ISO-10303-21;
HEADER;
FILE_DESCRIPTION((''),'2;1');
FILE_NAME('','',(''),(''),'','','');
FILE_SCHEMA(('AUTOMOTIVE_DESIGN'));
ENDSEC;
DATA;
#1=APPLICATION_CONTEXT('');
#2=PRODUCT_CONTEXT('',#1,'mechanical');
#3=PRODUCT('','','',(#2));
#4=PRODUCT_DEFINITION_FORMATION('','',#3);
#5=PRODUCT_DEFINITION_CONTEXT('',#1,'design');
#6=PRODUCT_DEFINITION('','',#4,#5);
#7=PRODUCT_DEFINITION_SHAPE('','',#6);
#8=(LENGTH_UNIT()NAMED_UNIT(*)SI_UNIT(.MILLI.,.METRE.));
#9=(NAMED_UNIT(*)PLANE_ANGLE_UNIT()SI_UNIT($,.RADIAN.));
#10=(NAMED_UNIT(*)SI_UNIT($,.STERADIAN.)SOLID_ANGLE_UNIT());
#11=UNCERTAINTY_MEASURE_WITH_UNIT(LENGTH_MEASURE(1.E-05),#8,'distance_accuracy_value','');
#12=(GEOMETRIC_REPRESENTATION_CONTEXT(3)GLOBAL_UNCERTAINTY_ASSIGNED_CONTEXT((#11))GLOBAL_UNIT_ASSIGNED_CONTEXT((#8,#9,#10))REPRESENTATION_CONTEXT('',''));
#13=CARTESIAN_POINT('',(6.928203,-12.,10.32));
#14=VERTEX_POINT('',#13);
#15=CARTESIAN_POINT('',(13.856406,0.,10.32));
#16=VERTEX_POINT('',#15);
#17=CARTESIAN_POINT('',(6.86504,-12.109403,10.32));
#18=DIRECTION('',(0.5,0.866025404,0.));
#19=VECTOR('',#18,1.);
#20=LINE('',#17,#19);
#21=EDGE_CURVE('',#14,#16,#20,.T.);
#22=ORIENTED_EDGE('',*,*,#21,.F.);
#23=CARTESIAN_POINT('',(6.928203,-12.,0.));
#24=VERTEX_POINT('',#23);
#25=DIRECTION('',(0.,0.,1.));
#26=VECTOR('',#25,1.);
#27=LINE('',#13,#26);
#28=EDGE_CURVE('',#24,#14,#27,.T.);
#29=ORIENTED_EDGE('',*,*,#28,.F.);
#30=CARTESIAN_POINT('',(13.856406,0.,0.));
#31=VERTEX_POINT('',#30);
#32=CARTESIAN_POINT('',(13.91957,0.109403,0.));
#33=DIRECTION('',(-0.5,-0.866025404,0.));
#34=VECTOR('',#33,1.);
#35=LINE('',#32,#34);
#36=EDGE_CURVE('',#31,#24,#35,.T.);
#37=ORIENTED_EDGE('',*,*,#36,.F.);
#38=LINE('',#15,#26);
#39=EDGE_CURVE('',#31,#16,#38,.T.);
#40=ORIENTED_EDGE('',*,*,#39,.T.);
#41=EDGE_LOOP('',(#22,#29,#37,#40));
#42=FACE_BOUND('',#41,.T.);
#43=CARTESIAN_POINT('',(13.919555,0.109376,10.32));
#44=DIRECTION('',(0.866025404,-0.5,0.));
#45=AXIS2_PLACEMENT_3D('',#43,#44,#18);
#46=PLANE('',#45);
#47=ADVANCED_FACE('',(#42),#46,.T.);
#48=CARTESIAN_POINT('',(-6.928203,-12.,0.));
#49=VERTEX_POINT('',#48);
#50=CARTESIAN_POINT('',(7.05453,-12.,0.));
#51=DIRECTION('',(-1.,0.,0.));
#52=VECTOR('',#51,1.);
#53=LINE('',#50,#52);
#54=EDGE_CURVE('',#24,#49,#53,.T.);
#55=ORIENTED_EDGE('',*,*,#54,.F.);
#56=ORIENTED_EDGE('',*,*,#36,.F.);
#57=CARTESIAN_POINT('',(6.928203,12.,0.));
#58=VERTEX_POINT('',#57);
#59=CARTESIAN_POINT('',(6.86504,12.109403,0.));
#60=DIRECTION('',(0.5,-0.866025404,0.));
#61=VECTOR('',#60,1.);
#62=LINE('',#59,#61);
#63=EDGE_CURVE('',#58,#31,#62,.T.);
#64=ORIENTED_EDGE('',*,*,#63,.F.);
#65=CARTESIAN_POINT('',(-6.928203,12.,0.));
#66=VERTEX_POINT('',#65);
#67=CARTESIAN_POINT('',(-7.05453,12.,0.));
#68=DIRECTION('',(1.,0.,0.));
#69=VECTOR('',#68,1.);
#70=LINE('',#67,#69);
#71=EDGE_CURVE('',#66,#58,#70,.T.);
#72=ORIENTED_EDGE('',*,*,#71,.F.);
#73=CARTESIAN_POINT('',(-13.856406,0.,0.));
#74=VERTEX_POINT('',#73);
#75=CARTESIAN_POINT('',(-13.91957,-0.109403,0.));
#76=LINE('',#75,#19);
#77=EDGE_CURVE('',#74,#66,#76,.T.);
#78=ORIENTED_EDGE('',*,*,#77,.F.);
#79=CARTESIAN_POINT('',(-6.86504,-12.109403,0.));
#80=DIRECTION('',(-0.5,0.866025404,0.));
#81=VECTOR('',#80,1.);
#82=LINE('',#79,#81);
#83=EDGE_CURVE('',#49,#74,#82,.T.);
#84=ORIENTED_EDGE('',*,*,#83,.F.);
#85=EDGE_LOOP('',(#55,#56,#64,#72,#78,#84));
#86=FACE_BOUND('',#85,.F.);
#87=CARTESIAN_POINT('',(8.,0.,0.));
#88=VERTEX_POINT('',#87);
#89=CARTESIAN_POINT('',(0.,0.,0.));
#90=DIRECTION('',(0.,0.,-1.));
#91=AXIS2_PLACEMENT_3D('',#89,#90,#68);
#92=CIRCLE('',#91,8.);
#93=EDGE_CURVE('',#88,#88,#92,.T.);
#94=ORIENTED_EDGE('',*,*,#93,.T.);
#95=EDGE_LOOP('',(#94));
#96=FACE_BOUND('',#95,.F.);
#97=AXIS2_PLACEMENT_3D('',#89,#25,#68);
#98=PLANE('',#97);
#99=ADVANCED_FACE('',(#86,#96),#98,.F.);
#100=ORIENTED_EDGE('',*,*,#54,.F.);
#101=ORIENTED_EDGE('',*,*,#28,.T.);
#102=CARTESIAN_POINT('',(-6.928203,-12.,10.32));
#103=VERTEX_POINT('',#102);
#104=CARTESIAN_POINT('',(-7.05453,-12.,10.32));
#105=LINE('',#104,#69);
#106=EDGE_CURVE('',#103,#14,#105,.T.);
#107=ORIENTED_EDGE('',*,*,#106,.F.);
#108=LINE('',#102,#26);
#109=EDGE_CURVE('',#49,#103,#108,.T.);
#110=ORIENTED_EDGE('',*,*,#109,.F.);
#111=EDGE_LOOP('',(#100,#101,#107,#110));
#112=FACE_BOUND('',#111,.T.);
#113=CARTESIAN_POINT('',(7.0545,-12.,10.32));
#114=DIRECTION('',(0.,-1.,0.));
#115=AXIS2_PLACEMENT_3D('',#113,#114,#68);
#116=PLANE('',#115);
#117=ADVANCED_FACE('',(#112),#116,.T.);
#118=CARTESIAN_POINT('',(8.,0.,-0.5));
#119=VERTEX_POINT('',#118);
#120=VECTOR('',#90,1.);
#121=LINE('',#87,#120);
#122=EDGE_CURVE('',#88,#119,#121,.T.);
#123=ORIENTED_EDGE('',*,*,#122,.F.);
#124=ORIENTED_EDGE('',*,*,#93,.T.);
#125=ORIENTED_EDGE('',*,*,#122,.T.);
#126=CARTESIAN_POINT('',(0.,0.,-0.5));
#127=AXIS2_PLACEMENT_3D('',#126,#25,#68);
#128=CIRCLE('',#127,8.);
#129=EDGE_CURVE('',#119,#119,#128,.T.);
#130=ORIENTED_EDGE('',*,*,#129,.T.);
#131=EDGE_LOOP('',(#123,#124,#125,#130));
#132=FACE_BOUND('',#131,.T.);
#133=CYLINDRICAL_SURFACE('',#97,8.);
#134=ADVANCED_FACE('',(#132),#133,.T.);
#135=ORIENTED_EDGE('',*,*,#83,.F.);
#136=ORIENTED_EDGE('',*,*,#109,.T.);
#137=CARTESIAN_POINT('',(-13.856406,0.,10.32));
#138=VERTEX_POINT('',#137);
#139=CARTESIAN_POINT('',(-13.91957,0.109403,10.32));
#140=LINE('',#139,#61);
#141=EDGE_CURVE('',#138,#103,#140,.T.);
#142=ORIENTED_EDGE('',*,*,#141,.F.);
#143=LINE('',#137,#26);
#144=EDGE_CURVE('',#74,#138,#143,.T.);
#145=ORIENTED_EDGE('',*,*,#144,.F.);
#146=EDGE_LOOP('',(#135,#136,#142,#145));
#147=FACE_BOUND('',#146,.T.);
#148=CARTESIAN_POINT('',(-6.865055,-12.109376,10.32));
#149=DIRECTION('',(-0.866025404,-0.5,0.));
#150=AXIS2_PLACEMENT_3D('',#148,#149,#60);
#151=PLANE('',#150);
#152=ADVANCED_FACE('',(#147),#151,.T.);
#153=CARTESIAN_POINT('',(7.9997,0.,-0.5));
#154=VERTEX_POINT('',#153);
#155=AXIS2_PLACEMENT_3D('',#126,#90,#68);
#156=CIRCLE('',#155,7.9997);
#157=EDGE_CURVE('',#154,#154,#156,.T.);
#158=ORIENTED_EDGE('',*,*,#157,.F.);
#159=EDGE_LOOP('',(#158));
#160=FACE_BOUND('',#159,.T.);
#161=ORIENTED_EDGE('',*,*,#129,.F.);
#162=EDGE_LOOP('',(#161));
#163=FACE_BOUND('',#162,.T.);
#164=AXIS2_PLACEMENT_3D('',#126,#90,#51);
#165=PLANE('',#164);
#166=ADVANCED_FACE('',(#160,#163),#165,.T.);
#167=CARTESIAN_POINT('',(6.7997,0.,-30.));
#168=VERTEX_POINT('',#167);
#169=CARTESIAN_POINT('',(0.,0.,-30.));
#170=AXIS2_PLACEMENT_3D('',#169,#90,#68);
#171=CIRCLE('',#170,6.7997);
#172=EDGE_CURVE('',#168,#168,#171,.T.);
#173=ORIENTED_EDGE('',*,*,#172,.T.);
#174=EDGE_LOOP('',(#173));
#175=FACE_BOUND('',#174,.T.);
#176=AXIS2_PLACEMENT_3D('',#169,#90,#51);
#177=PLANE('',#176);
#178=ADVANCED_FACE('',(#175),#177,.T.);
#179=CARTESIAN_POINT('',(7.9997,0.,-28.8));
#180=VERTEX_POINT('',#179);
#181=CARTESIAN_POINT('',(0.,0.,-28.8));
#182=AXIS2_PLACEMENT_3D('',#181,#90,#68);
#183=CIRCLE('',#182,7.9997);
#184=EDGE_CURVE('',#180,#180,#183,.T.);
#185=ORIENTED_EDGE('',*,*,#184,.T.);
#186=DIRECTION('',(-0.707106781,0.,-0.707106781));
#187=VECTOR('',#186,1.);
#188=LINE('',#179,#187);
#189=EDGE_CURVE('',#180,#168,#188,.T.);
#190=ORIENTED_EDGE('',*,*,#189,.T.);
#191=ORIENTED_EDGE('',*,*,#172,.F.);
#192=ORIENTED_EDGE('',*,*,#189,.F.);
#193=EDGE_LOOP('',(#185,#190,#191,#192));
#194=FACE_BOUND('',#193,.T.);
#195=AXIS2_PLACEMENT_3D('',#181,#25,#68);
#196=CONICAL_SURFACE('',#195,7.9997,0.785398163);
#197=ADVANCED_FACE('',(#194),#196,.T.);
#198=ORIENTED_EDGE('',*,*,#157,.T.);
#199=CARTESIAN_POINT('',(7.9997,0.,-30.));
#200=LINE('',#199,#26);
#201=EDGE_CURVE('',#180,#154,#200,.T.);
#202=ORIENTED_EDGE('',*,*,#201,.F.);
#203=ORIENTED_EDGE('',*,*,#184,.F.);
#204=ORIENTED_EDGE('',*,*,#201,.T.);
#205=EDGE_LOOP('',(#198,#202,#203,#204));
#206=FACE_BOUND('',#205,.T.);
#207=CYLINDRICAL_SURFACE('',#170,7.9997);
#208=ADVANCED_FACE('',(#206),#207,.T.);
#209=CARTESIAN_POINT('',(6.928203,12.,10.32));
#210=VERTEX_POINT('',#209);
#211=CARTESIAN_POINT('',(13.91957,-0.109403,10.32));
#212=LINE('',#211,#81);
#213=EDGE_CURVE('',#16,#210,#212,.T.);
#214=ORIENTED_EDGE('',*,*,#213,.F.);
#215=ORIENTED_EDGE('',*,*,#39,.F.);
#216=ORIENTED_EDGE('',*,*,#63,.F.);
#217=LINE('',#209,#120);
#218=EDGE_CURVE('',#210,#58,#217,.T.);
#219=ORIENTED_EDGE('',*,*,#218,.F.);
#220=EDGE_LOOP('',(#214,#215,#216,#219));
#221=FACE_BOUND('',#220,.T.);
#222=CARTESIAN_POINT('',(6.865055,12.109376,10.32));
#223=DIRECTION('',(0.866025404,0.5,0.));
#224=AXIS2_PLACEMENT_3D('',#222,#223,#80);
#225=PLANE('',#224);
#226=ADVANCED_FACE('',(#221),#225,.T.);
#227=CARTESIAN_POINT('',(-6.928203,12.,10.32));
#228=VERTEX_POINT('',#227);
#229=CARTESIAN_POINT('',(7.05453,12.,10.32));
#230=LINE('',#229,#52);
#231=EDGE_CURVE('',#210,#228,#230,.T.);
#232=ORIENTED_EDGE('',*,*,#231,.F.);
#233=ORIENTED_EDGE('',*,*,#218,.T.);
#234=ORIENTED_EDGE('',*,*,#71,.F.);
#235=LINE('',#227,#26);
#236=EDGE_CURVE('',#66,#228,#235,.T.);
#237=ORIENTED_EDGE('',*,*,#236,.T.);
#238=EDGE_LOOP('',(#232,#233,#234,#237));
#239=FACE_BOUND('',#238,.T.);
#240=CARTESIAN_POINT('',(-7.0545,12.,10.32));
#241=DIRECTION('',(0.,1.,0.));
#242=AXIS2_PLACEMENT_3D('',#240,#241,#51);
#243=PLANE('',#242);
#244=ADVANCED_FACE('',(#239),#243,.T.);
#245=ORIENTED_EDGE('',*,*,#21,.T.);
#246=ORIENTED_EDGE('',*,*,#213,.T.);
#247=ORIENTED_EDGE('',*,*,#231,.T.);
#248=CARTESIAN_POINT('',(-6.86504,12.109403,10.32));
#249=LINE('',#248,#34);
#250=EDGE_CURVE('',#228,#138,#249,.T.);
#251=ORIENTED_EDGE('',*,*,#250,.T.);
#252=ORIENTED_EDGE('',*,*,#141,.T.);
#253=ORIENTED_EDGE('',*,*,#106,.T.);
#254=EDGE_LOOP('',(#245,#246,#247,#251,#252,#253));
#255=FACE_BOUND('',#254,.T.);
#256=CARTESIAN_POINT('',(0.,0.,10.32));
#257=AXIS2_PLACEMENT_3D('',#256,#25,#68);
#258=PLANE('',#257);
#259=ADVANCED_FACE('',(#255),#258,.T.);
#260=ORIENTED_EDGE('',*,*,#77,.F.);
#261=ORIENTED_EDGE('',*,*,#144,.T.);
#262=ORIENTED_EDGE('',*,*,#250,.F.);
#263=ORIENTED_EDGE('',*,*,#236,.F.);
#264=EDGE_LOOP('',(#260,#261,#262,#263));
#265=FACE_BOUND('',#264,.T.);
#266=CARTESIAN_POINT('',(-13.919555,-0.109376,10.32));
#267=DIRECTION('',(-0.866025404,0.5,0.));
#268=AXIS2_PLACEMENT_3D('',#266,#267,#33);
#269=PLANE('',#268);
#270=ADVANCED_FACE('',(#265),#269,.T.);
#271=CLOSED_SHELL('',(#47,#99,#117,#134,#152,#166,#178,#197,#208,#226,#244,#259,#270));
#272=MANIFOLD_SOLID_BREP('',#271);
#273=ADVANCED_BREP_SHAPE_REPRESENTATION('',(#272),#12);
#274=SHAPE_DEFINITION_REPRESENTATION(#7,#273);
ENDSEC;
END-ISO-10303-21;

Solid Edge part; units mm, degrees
sketch "Sketch1" plane through (0, 0, 0) normal (0, 0, 1) x (1, 0, 0)
  circle A0 centre (0, 0) radius 13.92
  dimension "D1" = 27.84
extrude "Protrusion1" add sketch "Sketch1" along normal blind 10.32
sketch "Sketch2" plane through (0, 0, 0) normal (0, 0, -1) x (1, 0, 0)
  circle A0 centre (0, 0) radius 8
extrude "Protrusion2" add sketch "Sketch2" along normal blind 30
sketch "Sketch3" plane through (0, 0, -30) normal (0, 0, -1) x (1, 0, 0)
  circle A0 centre (0, 0) radius 7.9997
extrude "Cutout1" cut sketch "Sketch3" against normal blind 29.5 flip side to cut
chamfer "Chamfer_1" distance 1.2 angle 45 1 edges at (-7.9997, 0, -30)
sketch "Sketch4" plane through (0, 0, 10.32) normal (0, 0, 1) x (1, 0, 0)
  line L0 (-7.0545, 12) -> (7.0545, 12)
  dimension "D1" = 24
extrude "Cutout2" cut sketch "Sketch4" against normal up to next material side at (0, 12.05, 10.32)
pattern_circular "Pattern1" count 6 over 360 about axis through (0, 0, 10.32) along (0, 0, 1) of "Cutout2"
properties part number "24105091"
